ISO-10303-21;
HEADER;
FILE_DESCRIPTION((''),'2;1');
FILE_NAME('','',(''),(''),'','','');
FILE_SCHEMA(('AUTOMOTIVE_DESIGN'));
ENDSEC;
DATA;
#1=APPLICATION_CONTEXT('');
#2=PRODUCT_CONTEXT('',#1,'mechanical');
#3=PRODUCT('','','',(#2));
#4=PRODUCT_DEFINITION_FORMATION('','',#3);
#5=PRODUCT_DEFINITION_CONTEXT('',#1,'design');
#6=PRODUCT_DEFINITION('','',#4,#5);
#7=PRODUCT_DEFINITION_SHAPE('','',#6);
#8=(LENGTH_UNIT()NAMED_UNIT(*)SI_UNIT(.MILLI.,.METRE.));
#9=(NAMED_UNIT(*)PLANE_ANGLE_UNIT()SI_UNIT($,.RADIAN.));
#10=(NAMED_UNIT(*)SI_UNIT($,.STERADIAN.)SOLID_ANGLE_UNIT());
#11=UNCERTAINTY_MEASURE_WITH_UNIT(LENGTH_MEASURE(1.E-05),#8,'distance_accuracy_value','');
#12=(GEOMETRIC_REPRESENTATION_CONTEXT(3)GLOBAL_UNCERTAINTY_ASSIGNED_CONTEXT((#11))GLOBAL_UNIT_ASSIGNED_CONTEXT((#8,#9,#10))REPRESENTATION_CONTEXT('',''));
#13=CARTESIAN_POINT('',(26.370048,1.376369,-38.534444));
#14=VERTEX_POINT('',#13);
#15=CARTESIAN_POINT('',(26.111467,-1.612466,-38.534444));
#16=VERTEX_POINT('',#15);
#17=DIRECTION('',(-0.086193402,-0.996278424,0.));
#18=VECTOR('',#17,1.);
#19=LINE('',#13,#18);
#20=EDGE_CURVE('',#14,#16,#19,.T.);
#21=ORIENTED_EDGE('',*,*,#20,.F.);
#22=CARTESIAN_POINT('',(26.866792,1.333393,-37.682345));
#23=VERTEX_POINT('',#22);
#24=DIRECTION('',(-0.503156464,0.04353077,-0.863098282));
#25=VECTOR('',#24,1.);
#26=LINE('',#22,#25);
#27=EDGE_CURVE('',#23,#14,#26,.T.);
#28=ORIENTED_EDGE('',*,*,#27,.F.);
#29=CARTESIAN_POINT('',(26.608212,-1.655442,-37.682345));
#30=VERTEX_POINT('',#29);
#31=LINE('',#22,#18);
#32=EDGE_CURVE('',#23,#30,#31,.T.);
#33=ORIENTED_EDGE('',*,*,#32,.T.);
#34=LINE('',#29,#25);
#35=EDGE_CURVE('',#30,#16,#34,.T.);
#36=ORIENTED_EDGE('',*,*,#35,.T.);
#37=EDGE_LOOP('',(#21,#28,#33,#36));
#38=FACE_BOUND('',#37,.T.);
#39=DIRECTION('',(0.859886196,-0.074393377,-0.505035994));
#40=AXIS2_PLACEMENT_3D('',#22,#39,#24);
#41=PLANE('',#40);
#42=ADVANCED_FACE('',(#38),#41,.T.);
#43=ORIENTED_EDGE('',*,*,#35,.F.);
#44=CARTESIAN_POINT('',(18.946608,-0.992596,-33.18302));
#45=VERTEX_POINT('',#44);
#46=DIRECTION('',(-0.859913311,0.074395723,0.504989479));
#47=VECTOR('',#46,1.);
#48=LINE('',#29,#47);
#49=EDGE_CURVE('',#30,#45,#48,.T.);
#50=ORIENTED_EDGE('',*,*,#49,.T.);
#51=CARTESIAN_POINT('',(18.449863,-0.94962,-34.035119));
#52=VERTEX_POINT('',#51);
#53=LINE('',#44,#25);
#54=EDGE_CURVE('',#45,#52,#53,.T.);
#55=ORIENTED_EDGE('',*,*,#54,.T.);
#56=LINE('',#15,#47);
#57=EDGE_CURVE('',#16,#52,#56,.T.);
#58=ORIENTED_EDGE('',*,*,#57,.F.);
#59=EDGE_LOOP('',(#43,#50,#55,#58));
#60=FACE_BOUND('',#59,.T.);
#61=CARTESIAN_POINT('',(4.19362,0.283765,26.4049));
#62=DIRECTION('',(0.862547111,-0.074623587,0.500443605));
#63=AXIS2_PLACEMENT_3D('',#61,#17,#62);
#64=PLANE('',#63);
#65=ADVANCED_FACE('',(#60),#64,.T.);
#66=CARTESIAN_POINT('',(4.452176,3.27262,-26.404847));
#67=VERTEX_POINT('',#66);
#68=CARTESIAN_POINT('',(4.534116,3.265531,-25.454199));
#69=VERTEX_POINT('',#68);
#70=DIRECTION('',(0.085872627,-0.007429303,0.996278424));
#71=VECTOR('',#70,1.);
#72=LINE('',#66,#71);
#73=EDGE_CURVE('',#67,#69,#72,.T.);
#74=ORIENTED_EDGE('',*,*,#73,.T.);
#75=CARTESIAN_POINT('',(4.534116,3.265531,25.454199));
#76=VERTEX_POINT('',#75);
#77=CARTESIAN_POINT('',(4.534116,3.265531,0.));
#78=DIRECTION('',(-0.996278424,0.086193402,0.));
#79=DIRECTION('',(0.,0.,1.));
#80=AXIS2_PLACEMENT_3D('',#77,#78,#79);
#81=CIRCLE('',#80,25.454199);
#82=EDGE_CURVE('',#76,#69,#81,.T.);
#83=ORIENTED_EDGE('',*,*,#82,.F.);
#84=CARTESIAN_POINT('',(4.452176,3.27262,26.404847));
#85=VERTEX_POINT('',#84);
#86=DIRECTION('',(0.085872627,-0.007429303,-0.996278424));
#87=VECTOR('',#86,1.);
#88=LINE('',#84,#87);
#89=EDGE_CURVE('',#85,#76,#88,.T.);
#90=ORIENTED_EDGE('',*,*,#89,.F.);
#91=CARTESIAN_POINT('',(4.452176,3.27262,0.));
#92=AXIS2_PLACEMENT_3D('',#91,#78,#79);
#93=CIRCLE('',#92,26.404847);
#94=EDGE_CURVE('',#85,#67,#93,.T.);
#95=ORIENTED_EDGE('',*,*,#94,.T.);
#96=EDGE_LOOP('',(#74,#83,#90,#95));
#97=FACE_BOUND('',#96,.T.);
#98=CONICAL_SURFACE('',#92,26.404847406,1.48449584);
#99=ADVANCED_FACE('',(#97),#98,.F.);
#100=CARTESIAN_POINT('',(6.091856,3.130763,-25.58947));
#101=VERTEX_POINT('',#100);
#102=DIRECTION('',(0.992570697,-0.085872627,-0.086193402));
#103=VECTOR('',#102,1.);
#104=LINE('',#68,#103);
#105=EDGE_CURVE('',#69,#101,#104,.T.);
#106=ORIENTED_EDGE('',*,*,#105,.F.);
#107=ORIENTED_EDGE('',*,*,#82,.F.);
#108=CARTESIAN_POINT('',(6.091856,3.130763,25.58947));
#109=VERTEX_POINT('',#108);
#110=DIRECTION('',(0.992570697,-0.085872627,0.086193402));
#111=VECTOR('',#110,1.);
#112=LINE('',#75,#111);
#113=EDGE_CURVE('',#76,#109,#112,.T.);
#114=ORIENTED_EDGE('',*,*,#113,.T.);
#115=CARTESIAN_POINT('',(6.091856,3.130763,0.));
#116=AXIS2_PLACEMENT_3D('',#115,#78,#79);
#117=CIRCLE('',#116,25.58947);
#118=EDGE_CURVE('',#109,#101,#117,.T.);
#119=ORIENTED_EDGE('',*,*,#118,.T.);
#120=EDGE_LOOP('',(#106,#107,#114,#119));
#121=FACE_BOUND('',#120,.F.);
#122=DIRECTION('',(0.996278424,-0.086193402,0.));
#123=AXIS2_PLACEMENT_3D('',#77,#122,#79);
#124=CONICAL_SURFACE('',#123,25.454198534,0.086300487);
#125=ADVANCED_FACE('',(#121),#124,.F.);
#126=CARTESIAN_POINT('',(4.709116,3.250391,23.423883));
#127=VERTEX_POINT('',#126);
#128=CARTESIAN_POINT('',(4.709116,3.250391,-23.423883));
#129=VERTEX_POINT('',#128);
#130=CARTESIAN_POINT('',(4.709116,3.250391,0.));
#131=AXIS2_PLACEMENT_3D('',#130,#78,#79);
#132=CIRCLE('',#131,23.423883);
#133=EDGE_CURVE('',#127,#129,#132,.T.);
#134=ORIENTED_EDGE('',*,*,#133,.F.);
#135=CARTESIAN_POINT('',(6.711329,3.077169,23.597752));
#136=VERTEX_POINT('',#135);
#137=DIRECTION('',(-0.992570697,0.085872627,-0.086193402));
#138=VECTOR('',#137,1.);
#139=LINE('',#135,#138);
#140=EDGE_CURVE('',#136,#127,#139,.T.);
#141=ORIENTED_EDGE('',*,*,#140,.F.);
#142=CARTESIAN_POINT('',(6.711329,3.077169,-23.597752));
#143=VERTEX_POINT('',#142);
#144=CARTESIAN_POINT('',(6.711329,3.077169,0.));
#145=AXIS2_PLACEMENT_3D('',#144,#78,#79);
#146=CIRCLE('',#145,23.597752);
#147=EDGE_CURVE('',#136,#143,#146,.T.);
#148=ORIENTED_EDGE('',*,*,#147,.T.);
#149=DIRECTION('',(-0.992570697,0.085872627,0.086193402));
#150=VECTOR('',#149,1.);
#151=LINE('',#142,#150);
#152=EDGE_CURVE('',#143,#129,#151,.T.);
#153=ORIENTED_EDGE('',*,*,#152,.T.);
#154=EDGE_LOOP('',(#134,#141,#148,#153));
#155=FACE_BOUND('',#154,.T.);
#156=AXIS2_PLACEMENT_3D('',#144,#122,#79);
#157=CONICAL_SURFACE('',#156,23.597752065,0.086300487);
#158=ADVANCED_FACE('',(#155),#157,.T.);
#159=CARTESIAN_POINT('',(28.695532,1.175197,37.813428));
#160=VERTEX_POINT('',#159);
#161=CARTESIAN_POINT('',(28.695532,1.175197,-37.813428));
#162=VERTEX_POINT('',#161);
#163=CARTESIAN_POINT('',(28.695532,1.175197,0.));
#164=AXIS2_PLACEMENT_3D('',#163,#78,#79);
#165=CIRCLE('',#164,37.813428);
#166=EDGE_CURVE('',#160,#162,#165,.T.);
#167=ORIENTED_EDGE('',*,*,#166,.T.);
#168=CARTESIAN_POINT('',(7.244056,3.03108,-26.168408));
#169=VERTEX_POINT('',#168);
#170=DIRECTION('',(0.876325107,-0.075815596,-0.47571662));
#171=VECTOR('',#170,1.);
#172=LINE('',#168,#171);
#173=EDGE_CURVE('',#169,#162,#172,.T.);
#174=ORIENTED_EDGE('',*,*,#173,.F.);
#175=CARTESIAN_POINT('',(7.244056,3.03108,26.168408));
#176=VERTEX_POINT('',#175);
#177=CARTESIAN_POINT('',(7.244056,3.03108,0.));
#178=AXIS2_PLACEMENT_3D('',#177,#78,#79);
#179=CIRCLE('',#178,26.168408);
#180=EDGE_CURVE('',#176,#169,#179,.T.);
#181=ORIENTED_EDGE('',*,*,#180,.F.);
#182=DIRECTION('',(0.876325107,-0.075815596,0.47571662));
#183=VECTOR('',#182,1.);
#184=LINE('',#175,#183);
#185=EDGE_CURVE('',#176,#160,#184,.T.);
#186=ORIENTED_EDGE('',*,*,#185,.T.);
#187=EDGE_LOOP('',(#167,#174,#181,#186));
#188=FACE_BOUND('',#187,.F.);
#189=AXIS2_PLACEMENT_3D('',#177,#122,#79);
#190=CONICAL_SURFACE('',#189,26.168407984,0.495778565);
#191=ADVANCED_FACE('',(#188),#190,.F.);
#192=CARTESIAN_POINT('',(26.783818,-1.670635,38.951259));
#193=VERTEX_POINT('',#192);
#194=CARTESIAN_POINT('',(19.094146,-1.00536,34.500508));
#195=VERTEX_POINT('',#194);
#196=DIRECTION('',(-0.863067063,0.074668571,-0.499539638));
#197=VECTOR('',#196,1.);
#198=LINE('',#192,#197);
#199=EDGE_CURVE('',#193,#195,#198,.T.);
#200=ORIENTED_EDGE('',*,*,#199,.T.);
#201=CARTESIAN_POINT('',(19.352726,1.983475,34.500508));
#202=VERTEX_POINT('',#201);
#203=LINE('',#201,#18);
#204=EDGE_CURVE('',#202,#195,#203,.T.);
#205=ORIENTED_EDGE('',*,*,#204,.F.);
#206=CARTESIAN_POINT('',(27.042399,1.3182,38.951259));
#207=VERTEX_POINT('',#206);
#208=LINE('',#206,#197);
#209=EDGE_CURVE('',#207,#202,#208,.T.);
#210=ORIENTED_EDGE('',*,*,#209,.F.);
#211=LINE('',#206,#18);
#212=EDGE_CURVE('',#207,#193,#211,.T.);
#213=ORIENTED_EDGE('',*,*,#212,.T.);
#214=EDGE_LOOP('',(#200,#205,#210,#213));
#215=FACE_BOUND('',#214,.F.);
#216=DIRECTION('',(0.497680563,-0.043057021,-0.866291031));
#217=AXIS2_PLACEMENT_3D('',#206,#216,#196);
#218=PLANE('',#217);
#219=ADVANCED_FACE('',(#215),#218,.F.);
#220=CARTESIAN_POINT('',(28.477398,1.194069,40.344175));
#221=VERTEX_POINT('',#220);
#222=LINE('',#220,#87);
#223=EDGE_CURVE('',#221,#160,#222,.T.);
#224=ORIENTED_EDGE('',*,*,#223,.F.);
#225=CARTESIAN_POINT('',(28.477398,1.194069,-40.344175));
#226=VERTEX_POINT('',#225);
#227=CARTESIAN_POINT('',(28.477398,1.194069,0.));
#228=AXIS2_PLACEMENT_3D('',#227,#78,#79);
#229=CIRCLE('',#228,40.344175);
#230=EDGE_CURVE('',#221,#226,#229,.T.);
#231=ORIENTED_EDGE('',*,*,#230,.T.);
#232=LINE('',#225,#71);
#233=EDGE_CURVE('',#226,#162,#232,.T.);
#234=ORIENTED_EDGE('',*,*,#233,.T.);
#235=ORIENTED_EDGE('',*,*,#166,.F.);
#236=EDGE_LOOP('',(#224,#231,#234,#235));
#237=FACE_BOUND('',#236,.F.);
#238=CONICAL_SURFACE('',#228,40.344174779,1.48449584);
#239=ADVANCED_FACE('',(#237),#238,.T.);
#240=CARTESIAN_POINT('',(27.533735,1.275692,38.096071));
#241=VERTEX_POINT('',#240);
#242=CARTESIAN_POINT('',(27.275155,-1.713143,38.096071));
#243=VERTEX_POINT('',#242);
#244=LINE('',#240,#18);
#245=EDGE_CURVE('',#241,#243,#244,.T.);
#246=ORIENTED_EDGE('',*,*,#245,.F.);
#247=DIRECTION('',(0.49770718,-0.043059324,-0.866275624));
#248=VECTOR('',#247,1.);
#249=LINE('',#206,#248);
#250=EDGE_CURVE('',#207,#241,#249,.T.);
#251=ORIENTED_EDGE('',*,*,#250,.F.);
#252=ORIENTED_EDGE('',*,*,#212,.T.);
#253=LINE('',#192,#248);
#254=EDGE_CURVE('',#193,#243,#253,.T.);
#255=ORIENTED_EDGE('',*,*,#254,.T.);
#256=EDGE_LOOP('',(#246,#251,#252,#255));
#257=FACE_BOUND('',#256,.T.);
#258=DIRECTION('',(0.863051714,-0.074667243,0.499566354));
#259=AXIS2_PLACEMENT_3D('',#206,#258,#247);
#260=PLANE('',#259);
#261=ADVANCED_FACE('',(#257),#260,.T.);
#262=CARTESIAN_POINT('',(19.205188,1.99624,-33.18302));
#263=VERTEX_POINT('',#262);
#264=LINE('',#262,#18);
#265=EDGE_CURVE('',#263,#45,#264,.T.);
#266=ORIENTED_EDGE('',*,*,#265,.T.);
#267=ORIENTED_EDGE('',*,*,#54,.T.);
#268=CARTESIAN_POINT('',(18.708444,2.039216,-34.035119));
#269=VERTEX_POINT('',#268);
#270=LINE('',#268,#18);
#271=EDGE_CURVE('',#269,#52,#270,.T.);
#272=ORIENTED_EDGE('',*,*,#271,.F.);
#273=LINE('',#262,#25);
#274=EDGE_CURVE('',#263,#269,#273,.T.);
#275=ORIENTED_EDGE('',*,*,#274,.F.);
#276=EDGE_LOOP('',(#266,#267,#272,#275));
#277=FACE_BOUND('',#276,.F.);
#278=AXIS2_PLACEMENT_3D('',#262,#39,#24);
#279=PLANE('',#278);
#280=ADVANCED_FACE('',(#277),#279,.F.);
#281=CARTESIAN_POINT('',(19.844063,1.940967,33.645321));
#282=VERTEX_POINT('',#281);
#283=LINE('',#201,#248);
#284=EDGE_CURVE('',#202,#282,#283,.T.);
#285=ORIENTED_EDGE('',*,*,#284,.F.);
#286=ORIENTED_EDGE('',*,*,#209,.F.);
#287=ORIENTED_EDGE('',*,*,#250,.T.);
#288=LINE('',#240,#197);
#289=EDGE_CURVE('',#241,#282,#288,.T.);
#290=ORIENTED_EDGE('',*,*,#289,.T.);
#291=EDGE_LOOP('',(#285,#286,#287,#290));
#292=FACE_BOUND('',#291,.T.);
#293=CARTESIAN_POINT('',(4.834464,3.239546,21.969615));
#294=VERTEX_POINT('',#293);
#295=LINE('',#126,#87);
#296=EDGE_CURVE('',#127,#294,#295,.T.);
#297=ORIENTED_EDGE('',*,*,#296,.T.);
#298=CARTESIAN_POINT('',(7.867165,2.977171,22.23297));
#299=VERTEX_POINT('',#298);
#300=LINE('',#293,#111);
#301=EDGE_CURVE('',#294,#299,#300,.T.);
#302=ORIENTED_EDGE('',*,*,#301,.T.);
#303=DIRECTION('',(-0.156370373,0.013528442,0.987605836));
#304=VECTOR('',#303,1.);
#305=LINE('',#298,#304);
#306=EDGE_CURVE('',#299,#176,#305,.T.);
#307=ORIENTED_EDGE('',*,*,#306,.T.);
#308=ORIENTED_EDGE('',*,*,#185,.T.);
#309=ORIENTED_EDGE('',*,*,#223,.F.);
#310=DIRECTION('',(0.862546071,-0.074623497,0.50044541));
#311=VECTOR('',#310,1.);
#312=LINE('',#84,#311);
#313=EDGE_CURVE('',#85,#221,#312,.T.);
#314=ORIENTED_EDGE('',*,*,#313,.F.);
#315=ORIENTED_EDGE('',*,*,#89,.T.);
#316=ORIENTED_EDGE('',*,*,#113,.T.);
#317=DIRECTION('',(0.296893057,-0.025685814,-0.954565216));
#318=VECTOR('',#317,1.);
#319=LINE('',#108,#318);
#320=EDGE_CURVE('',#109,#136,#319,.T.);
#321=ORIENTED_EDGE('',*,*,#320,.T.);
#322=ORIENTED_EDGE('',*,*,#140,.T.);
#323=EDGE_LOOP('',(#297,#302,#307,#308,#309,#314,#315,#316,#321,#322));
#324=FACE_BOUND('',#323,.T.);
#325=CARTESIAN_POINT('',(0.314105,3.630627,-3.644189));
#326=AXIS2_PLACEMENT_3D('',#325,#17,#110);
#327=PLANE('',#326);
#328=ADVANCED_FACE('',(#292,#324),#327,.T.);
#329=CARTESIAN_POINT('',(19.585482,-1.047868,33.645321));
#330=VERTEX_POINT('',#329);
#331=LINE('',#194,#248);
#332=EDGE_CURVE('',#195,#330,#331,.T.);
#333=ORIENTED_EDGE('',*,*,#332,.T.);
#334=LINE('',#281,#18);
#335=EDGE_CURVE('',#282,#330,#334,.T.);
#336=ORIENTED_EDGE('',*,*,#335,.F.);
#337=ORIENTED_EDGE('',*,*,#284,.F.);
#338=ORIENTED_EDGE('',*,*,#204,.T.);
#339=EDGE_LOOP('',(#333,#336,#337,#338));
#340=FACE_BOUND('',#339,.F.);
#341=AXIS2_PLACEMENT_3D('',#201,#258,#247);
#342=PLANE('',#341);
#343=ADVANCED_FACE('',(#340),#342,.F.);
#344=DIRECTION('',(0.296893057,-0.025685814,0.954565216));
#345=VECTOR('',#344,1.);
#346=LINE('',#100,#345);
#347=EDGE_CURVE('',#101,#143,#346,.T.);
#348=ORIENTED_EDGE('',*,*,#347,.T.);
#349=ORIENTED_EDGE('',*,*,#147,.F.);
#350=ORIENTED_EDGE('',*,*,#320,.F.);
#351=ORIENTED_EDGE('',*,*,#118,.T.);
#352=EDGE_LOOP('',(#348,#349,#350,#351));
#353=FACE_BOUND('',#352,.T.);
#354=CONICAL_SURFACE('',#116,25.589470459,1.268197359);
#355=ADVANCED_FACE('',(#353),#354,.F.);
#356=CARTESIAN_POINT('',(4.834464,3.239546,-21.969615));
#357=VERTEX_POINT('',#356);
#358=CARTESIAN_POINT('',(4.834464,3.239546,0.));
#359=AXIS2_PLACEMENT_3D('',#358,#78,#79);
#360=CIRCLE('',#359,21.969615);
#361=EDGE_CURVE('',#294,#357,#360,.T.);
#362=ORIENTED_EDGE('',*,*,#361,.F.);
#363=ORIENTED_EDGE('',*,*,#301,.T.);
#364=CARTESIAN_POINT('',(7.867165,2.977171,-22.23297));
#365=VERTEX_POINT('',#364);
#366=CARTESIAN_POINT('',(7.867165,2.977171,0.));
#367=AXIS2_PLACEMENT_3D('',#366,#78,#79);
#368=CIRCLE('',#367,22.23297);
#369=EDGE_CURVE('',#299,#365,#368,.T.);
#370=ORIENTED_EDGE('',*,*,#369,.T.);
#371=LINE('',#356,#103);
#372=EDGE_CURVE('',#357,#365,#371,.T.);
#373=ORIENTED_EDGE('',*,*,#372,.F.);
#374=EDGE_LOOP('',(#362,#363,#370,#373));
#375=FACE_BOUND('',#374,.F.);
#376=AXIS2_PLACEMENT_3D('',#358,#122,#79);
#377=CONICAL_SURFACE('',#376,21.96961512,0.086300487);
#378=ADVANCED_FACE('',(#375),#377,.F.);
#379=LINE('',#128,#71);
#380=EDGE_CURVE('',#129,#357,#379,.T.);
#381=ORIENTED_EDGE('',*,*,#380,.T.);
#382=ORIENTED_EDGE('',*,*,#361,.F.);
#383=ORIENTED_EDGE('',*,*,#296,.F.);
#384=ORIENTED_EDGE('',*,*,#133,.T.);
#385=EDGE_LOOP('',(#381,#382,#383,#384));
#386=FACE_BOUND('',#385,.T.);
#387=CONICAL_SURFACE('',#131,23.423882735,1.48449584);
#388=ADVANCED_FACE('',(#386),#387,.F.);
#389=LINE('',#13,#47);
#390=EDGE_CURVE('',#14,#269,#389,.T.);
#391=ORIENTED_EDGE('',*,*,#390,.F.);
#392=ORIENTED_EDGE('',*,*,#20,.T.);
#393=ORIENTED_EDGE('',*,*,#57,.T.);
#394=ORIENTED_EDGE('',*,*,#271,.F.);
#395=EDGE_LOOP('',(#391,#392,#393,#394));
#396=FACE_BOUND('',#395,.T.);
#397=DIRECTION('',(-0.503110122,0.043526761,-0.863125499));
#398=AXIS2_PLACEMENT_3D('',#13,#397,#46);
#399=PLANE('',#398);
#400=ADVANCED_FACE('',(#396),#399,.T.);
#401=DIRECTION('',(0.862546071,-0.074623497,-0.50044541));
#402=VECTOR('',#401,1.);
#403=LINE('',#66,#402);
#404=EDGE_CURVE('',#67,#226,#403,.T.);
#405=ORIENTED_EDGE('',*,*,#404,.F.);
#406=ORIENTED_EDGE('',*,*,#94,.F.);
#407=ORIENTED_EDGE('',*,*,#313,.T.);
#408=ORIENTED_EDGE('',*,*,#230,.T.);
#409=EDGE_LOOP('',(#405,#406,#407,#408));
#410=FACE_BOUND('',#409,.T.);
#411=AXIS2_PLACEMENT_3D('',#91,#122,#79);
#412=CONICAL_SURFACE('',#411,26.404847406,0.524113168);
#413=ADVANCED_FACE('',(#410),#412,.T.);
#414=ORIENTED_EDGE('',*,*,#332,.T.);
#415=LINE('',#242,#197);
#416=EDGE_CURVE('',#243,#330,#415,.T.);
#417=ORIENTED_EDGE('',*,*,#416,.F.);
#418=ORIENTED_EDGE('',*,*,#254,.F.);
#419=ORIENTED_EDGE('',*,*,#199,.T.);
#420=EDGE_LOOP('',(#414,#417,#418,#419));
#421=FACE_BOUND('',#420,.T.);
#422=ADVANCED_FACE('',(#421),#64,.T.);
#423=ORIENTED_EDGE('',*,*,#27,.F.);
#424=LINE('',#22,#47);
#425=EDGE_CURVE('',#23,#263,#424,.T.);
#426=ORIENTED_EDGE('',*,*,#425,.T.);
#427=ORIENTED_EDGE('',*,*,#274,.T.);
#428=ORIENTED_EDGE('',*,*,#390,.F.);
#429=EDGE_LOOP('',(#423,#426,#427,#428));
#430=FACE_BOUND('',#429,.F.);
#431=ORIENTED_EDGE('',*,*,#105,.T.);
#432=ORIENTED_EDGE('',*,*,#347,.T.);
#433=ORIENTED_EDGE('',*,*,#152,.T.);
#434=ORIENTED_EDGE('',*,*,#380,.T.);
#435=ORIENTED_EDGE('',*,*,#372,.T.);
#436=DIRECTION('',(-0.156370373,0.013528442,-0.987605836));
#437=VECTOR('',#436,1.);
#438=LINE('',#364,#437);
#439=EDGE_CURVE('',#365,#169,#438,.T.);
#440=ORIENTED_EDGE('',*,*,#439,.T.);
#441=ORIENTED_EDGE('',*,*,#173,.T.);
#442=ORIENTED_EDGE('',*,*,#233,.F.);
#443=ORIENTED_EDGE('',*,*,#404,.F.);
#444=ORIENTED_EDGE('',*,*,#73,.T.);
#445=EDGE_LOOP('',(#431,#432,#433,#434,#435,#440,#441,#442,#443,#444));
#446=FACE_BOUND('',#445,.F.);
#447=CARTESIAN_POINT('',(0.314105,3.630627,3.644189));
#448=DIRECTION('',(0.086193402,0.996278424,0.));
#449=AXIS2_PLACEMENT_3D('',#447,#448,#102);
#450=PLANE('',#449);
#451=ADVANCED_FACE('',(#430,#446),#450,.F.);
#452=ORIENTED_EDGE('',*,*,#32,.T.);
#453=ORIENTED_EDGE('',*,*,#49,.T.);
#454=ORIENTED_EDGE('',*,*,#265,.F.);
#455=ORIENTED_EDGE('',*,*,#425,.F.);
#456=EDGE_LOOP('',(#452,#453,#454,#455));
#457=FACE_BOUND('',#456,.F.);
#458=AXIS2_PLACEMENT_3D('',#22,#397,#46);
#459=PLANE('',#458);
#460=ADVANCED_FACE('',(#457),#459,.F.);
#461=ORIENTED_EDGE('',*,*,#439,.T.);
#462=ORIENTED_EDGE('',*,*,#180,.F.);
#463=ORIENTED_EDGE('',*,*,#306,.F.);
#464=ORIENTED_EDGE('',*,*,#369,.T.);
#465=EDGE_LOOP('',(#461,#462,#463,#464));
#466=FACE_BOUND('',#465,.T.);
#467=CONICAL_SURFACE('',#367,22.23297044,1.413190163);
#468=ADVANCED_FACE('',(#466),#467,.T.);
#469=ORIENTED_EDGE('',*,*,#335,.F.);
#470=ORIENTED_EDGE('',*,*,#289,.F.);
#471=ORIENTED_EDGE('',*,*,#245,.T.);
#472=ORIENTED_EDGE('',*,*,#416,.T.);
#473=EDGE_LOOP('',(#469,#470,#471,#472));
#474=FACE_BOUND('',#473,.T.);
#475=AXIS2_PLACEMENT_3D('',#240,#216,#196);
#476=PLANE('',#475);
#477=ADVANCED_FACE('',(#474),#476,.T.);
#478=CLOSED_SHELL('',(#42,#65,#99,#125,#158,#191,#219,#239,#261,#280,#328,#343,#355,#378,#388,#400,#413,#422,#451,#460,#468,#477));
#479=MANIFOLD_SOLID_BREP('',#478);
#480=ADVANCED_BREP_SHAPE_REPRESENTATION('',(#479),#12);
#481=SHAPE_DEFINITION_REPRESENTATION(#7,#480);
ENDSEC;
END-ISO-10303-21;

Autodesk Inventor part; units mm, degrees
ref_plane "YZ Plane" through (0, 0, 0) normal (1, 0, 0) x (0, 1, 0)
ref_plane "XZ Plane" through (0, 0, 0) normal (0, 1, 0) x (-1, 0, 0)
ref_plane "XY Plane" through (0, 0, 0) normal (0, 0, 1) x (1, 0, 0)
sketch "Sketch1" plane through (0, 0, 0) normal (1, 0, 0) x (0, 1, 0)
  arc A0 (6, 5) -> (0, 6.4776) centre (1.5083, -0.3184) ccw
  arc A1 (0, 6.4776) -> (-6, 2) centre (-0.0372, 0.2686) ccw
  arc A2 (-6, 2) -> (-5, -3.4628) centre (-1.5043, 0) ccw
  arc A3 (-5, -3.4628) -> (2, -5.5969) centre (1.6627, 5.8444) ccw
  arc A4 (2, -5.5969) -> (6.9353, -3.4628) centre (1.5482, 2.2219) ccw
  arc A5 (6, 5) -> (13, 1) centre (22.0402, 24.9454) ccw
  arc A6 (13, -1) -> (6.9353, -3.4628) centre (16.5953, -18.5517) ccw
  arc A7 (13, -1) -> (13, 1) centre (11.912, 0) ccw
  arc A8 (15.1251, -1.2068) -> (15.1251, 1.1192) centre (13.8597, -0.0438) ccw
  arc A9 (6.9841, 5.7712) -> (15.1251, 1.1192) centre (25.6388, 28.9677) ccw
  arc A10 (6.9841, 5.7712) -> (0.0061, 7.4897) centre (1.7602, -0.414) ccw
  arc A11 (0.0061, 7.4897) -> (-6.9719, 2.2822) centre (-0.0372, 0.2686) ccw
  arc A12 (-6.9719, 2.2822) -> (-5.8089, -4.0711) centre (-1.7435, -0.0438) ccw
  arc A13 (-5.8089, -4.0711) -> (2.3321, -6.5529) centre (1.9397, 6.7532) ccw
  arc A14 (2.3321, -6.5529) -> (8.0718, -4.0711) centre (1.8067, 2.5403) ccw
  arc A15 (15.1251, -1.2068) -> (8.0718, -4.0711) centre (19.3063, -21.6193) ccw
  point P0 (0, 0)
sketch "Sketch2" plane through (0, 0, 0) normal (0, 0, 1) x (1, 0, 0)
  arc A0 (4.5893, 15.6275) -> (5.3653, 12.7341) centre (8.4769, 15.1194) ccw
  arc A1 (7.1334, 6.0475) -> (5.3653, 12.7341) centre (-9.3019, 5.2787) ccw
  arc A2 (4, -1) -> (7.1334, 6.0475) centre (-2.3212, 6.0308) ccw
  arc A3 (4, -1) -> (2.2783, -7.605) centre (15.174, -7.4395) ccw
  arc A4 (4.5893, 15.6275) -> (-5.4042, 15.6275) centre (-0.4074, 13.9881) ccw
  arc A5 (-4.7137, -7.4395) -> (2.2783, -7.605) centre (-1.0169, 0.9638) ccw
  arc A6 (-5.4042, 15.6275) -> (-4.7137, -7.4395) centre (15.8945, 4.7212) ccw
  point P0 (0, 0)
  point P1 (16.0644, 6.0537)
sketch "Sketch3" plane through (0, 0, 0) normal (0, 0, 1) x (1, 0, 0)
  line L0 (8, 6) -> (8, -9.7213)
  line L1 (8, 6) -> (8, 19.0901)
  arc A0 (8, -9.7213) -> (8, 19.0901) centre (-3.1204, 4.6844) ccw
  point P0 (0, 0)
sketch "Sketch4" plane through (0, 0, 0) normal (0, 0, 1) x (1, 0, 0)
  arc A0 (4, -3) -> (3, -7.466) centre (10.199, -6.733) ccw
  arc A1 (4, -3) -> (7.6292, 3.7812) centre (-12.6955, 10.297) ccw
  arc A2 (7.6292, 3.7812) -> (7, 11) centre (-7.2238, 6.1234) ccw
  arc A3 (7, 11) -> (6.1482, 13) centre (-7.2238, 6.1234) ccw
  arc A4 (5.3976, 15.5783) -> (6.1482, 13) centre (8.6756, 15.1342) ccw
  arc A5 (3, -7.466) -> (9, -9) centre (8, -0.4104) ccw
  arc A6 (11, 18) -> (5.3976, 15.5783) centre (10.5, 11.4654) ccw
  arc A7 (9, -9) -> (11, 18) centre (-69.2967, 10.3738) ccw
  point P0 (0, 0)
sketch "Sketch5" plane through (0, 0, 0) normal (1, 0, 0) x (0, 1, 0)
  arc A0 (13, -1.7602) -> (13, 2.0171) centre (12.6189, 0.1284) ccw
  arc A1 (17, 0) -> (13, 2.0171) centre (12.9569, -3.0431) ccw
  arc A2 (13, -1.7602) -> (17, 0) centre (13.7728, 1.9087) ccw
  point P0 (0, 0)
sketch "Sketch7" plane through (0, 0, 0) normal (1, 0, 0) x (0, 1, 0)
  circle A0 centre (5, 0.3375) radius 25
  point P0 (0, 0)
  dimension "d10" = 50
sketch "Sketch8" plane through (0, 0, 0) normal (0, 0, 1) x (1, 0, 0)
  arc A0 (4.5893, 15.6275) -> (5.3653, 12.7341) centre (8.4769, 15.1194) ccw
  arc A1 (7.1334, 6.0475) -> (5.3653, 12.7341) centre (-9.3019, 5.2787) ccw
  arc A2 (4, -1) -> (7.1334, 6.0475) centre (-2.3212, 6.0308) ccw
  arc A3 (4, -1) -> (2.2783, -7.605) centre (15.174, -7.4395) ccw
  arc A4 (4.5893, 15.6275) -> (-5.4042, 15.6275) centre (-0.4074, 13.9881) ccw
  arc A5 (-4.7137, -7.4395) -> (2.2783, -7.605) centre (-1.0169, 0.9638) ccw
  arc A6 (-5.4042, 15.6275) -> (-4.7137, -7.4395) centre (15.8945, 4.7212) ccw
  point P0 (0, 0)
sketch "Sketch9" plane through (0, 0, 0) normal (0, 0, 1) x (1, 0, 0)
  line L0 (2.2936, -15.8564) -> (2.2936, -6.8564)
  arc A0 (2.2936, -6.8564) -> (-3.9962, -9.9765) centre (0.2723, -10.6815) ccw
  arc A1 (-4, -16) -> (2.2936, -15.8564) centre (-0.9465, -11.8394) ccw
  arc A2 (-3.9962, -9.9765) -> (-4, -16) centre (14.3076, -12.9998) ccw
  point P0 (0, 0)
sketch "Sketch10" plane through (0, 0, 0) normal (1, 0, 0) x (0, 1, 0)
  arc A0 (13, -1) -> (13, 1) centre (11.912, 0) ccw
  arc A1 (6, 5) -> (13, 1) centre (22.0402, 24.9454) ccw
  arc A2 (6, 5) -> (0, 6.4776) centre (1.5083, -0.3184) ccw
  arc A3 (0, 6.4776) -> (-6, 2) centre (-0.0372, 0.2686) ccw
  arc A4 (-6, 2) -> (-5, -3.4628) centre (-1.5043, 0) ccw
  arc A5 (-5, -3.4628) -> (2, -5.5969) centre (1.6627, 5.8444) ccw
  arc A6 (2, -5.5969) -> (6.9353, -3.4628) centre (1.5482, 2.2219) ccw
  arc A7 (13, -1) -> (6.9353, -3.4628) centre (16.5953, -18.5517) ccw
  point P0 (0, 0)
sketch "Sketch11" plane through (0, 0, 0) normal (0, 0, 1) x (1, 0, 0)
  arc A0 (4, -3) -> (3, -7.466) centre (10.199, -6.733) ccw
  arc A1 (4, -3) -> (7.6292, 3.7812) centre (-12.6955, 10.297) ccw
  arc A2 (7.6292, 3.7812) -> (7, 11) centre (-7.2238, 6.1234) ccw
  arc A3 (7, 11) -> (6.1482, 13) centre (-7.2238, 6.1234) ccw
  arc A4 (5.3976, 15.5783) -> (6.1482, 13) centre (8.6756, 15.1342) ccw
  arc A5 (11, -15) -> (11, 18) centre (-58.5, 1.5) ccw
  arc A6 (3, -7.466) -> (3.1376, -15) centre (85.1776, -9.733) ccw
  arc A7 (6, 24) -> (5.3976, 15.5783) centre (36.0186, 17.6203) ccw
  arc A8 (11, 18) -> (6, 24) centre (2.7033, 16.1694) ccw
  arc A9 (3.1376, -15) -> (11, -15) centre (7.0688, -10.5838) ccw
  arc A10 (5, 24) -> (4.5969, 15.5783) centre (45.756, 17.829) ccw
  arc A11 (-2, 19) -> (4.5969, 15.5783) centre (5.6189, 25.6189) ccw
  arc A12 (5, 24) -> (-2, 19) centre (11.5, 7.5) ccw
  point P0 (0, 0)
sketch "Sketch12" plane through (0, 0, 0) normal (1, 0, 0) x (0, 1, 0)
  circle A0 centre (3, 0.2318) radius 20
  circle A1 centre (3, 0.2318) radius 19
  point P0 (0, 0)
  dimension "d21" = 40
  dimension "d22" = 38
sketch "Sketch13" plane through (0, 0, 0) normal (0, 0, 1) x (1, 0, 0)
  arc A0 (4.6444, -3) -> (3.6444, -7.466) centre (10.8434, -6.733) ccw
  arc A1 (4.6444, -3) -> (8.2736, 3.7812) centre (-12.0511, 10.297) ccw
  arc A2 (8.2736, 3.7812) -> (7.6444, 11) centre (-6.5793, 6.1234) ccw
  arc A3 (7.6444, 11) -> (6.7926, 13) centre (-6.5793, 6.1234) ccw
  arc A4 (6.042, 15.5783) -> (6.7926, 13) centre (9.3201, 15.1342) ccw
  arc A5 (12.1446, -13.3563) -> (11.6094, 18.8213) centre (-67.1488, 1.418) ccw
  arc A6 (4.5893, 15.6275) -> (5.3653, 12.7341) centre (8.4769, 15.1194) ccw
  arc A7 (7.1334, 6.0475) -> (5.3653, 12.7341) centre (-9.3019, 5.2787) ccw
  arc A8 (4, -1) -> (7.1334, 6.0475) centre (-2.3212, 6.0308) ccw
  arc A9 (4, -1) -> (2.2783, -7.605) centre (15.174, -7.4395) ccw
  arc A10 (-5.4042, 15.6275) -> (-4.7137, -7.4395) centre (15.8945, 4.7212) ccw
  arc A11 (3.6444, -7.466) -> (4.6444, -19) centre (48.1921, -9.4141) ccw
  arc A12 (1, -17) -> (2.2783, -7.605) centre (-20.1318, -9.3402) ccw
  arc A13 (4.5893, 15.6275) -> (4, 28) centre (-90.183, 17.3138) ccw
  arc A14 (6.0097, 28) -> (6.042, 15.5783) centre (472.3708, 23) ccw
  arc A15 (4.6444, -19) -> (12.1446, -13.3563) centre (5.8088, -12.7419) ccw
  arc A16 (11.6094, 18.8213) -> (6.0097, 28) centre (-7.4499, 13.4913) ccw
  arc A17 (-4.7137, -7.4395) -> (1, -17) centre (32.2099, 8.14) ccw
  arc A18 (4, 28) -> (-5.4042, 15.6275) centre (39.2165, -8.5279) ccw
  point P0 (0, 0)
sketch "Sketch16" plane through (0, 0, 0) normal (0, 0, 1) x (1, 0, 0)
  arc A0 (7.7852, 10.9763) -> (6.9451, 12.9812) centre (-6.467, 6.1832) ccw
  arc A1 (8.372, 3.7539) -> (7.7852, 10.9763) centre (-6.467, 6.1832) ccw
  arc A2 (4.7031, -3.0059) -> (8.372, 3.7539) centre (-11.9141, 10.3888) ccw
  arc A3 (4.7031, -3.0059) -> (3.6769, -7.4659) centre (10.88, -6.7752) ccw
  arc A4 (6.2096, 15.5639) -> (6.9451, 12.9812) centre (9.485, 15.1006) ccw
  line L0 (3.6769, -7.4659) -> (3.6769, -13)
  line L1 (3.6769, -13) -> (8.7312, -13)
  line L2 (7.1813, -23) -> (8.45, -23) projected
  line L3 (6.2096, 15.5639) -> (6.0634, 19)
  line L4 (6.0634, 19) -> (8.7312, 19)
  line L5 (8.7312, 19) -> (8.7312, -13)
  point P0 (0, 0)
sketch "Sketch18" plane through (0, 0, 0) normal (0, 1, 0) x (-1, 0, 0)
  arc A0 (0, 16) -> (0, -16) centre (63, 0) ccw
  arc A1 (0, -16) -> (0, 16) centre (-1, 0) ccw
  point P0 (0, 0)
sketch "Sketch19" plane through (0, 0, 0) normal (0, 0, 1) x (1, 0, 0)
  arc A0 (0, -13) -> (0, 21.2939) centre (-44.6367, 4.1469) ccw
  arc A1 (0, 21.2939) -> (0, -13) centre (9.2646, 4.1469) ccw
  point P0 (0, 0)
sketch "Sketch20" plane through (0, 0, 0) normal (0, 1, 0) x (-1, 0, 0)
  arc A0 (0, 18) -> (0, -21) centre (116.9496, -1.5) ccw
  arc A1 (0, -21) -> (0, 18) centre (-188.5, -1.5) ccw
  point P0 (0, 0)
sketch "Sketch21" plane through (0, 0, 0) normal (0, 0, 1) x (1, 0, 0)
  arc A0 (4.5893, 15.6275) -> (5.3653, 12.7341) centre (8.4769, 15.1194) ccw
  arc A1 (7.1334, 6.0475) -> (5.3653, 12.7341) centre (-9.3019, 5.2787) ccw
  arc A2 (4, -1) -> (7.1334, 6.0475) centre (-2.3212, 6.0308) ccw
  arc A3 (4, -1) -> (2.2783, -7.605) centre (15.174, -7.4395) ccw
  arc A4 (-5.4042, 15.6275) -> (-4.7137, -7.4395) centre (15.8945, 4.7212) ccw
  arc A5 (1.6146, -47) -> (2.2783, -7.605) centre (-871.3055, -12.5889) ccw
  arc A6 (-4.7137, -7.4395) -> (1.6146, -47) centre (3.6662, -26.3854) ccw
  arc A7 (6.6047, 48.2766) -> (4.5893, 15.6275) centre (207.8183, 19.4692) ccw
  arc A8 (6.6047, 48.2766) -> (-5.4042, 15.6275) centre (18.1068, 25.5128) ccw
  point P0 (4.9602, 0)
sketch "Sketch22" plane through (0, 0, 0) normal (1, 0, 0) x (0, 1, 0)
  arc A0 (12.671, -1.508) -> (10.1452, -2.4415) centre (13.2273, -6.897) ccw
  arc A1 (5.972, -5.9193) -> (10.1452, -2.4415) centre (1.4729, 3.7221) ccw
  arc A2 (-1.0034, -7.134) -> (5.972, -5.9193) centre (0.0411, 7.5036) ccw
  arc A3 (-6.1623, -3.0965) -> (-1.0034, -7.134) centre (-0.5861, -1.2862) ccw
  arc A4 (-5.468, 3.7221) -> (-6.1623, -3.0965) centre (0.6002, -0.3405) ccw
  arc A5 (6.5632, 5.6579) -> (-0.5861, 6.5886) centre (1.6095, -4.4698) ccw
  arc A6 (-0.5861, 6.5886) -> (-5.468, 3.7221) centre (0, 0) ccw
  arc A7 (6.5632, 5.6579) -> (11.3492, 2.8919) centre (22.0985, 27.015) ccw
  arc A8 (14.2401, 1.3463) -> (11.3492, 2.8919) centre (11.1023, -1.0462) ccw
  arc A9 (13.4173, -1.2862) -> (14.2401, 1.3463) centre (12.4465, 0.462) ccw
  arc A10 (12.671, -1.508) -> (13.4173, -1.2862) centre (12.7302, -0.341) ccw
  point P0 (0, 0)
  point P1 (20.1069, -9.3097)
sketch "Sketch23" plane through (0, 0, 0) normal (0, 0, 1) x (1, 0, 0)
  arc A0 (4, -3) -> (3, -7.466) centre (10.199, -6.733) ccw
  arc A1 (4, -3) -> (7.6292, 3.7812) centre (-12.6955, 10.297) ccw
  arc A2 (7.6292, 3.7812) -> (7, 11) centre (-7.2238, 6.1234) ccw
  arc A3 (7, 11) -> (6.1482, 13) centre (-7.2238, 6.1234) ccw
  arc A4 (5.3976, 15.5783) -> (6.1482, 13) centre (8.6756, 15.1342) ccw
  arc A5 (3, -7.466) -> (12.0039, -34.009) centre (74.5087, 1.9925) ccw
  arc A6 (12.0039, -34.009) -> (12.0039, 40.009) centre (-50.8687, 3) ccw
  arc A7 (12.0039, 40.009) -> (5.3976, 15.5783) centre (75.5489, 9.7171) ccw
  point P0 (0, 0)
sketch "Sketch24" plane through (0, 0, 0) normal (1, 0, 0) x (0, 1, 0)
  circle A0 centre (4, 0) radius 24.0208
  circle A1 centre (4, 0) radius 54.037
  point P0 (0, 0)
sketch "Sketch25" plane through (0, 0, 0) normal (0, 0, 1) x (1, 0, 0)
  line L0 (2.9628, -6.7024) -> (3, -28)
  arc A0 (7, 36) -> (4.5756, 19.3965) centre (118.9772, 11.1705) ccw
  arc A1 (5.9839, 23.9235) -> (5.3976, 15.5783) centre (44.4323, 17.0293) ccw
  arc A2 (5.9839, 23.9235) -> (7, 33) centre (-89.9402, 39.2578) ccw
  arc A3 (5.3976, 15.5783) -> (7, 33) centre (-0.8843, 24.9407) ccw
  arc A4 (7, 36) -> (4.5756, 19.3965) centre (13.0884, 26.6322) ccw
  arc A5 (3, -28) -> (2.9628, -6.7024) centre (-3.3961, -17.3623) ccw
  point P0 (0, 0)
sketch "Sketch31" plane through (0, 0, 0) normal (1, 0, 0) x (0, 1, 0)
  circle A0 centre (4.1775, 0) radius 24.15
  circle A1 centre (4.1775, 0) radius 23
  point P0 (0, 0)
  dimension "d65" = 46
  dimension "d66" = 48.3
sketch "Sketch32" plane through (0, 0, 0) normal (0, 0, 1) x (1, 0, 0)
  arc A0 (4, -1) -> (2.2783, -7.605) centre (15.174, -7.4395) ccw
  arc A1 (4, -1) -> (7.1334, 6.0475) centre (-2.3212, 6.0308) ccw
  arc A2 (7.1334, 6.0475) -> (5.3653, 12.7341) centre (-9.3019, 5.2787) ccw
  arc A3 (4.5893, 15.6275) -> (5.3653, 12.7341) centre (8.4769, 15.1194) ccw
  arc A4 (-5.4042, 15.6275) -> (-4.7137, -7.4395) centre (15.8945, 4.7212) ccw
  arc A5 (1.6146, -47) -> (2.2783, -7.605) centre (-871.3055, -12.5889) ccw
  arc A6 (-4.7137, -7.4395) -> (1.6146, -47) centre (3.6662, -26.3854) ccw
  arc A7 (6.6047, 48.2766) -> (4.5893, 15.6275) centre (207.8183, 19.4692) ccw
  arc A8 (6.6047, 48.2766) -> (-5.4042, 15.6275) centre (18.1068, 25.5128) ccw
  point P0 (0, 0)
sketch "Sketch34" plane through (0, 0, 0) normal (0, 0, 1) x (1, 0, 0)
  arc A0 (5, -4) -> (9, 6) centre (-7, 6.6) ccw
  arc A1 (5, -4) -> (4, -8) centre (10.5, -7.5) ccw
  arc A2 (4, -19.9725) -> (4, -8) centre (-95.2669, -13.9862) ccw
  arc A3 (9, 6) -> (6.6308, 15) centre (-16.4523, 4.1118) ccw
  line L0 (6.6308, 15) -> (6.6308, 28.2457)
  arc A4 (4, -19.9725) -> (6.6308, 28.2457) centre (64.4177, 0.9119) ccw
  point P0 (0, 0)
sketch "Sketch35" plane through (0, 0, 0) normal (0, 0, 1) x (1, 0, 0)
  arc A0 (12, -8) -> (-7, -11) centre (15.0455, -88.9545) ccw
  arc A1 (-7, -11) -> (12, -8) centre (3.194, -13.8955) ccw
  point P0 (0, 0)
ref_plane "Work Plane16" through (6.6308, 4.1775, 0) normal (1, 0, 0) x (0, 0, -1)
sketch "Sketch36" plane through (6.6308, 4.1775, 0) normal (1, 0, 0) x (0, 0, -1)
  arc A0 (21.5893, 10.8225) -> (-21.5893, 10.8225) centre (0, -0.149) ccw
  arc A1 (20.2947, 10.8225) -> (-20.2947, 10.8225) centre (0, 0) ccw
  line L0 (-21.5893, 10.8225) -> (-20.2947, 10.8225)
  line L1 (-21.5893, 10.8225) -> (-20.2947, 10.8225)
  line L2 (20.2947, 10.8225) -> (21.5893, 10.8225)
  point P0 (0, -4.1775)
sketch "Sketch37" plane through (0, 0, 0) normal (1, 0, 0) x (0, 1, 0)
  arc A0 (15, 20.2947) -> (6, 22.9277) centre (4.1775, 0) ccw
  arc A1 (15, 21.5893) -> (6, 24.0811) centre (4.9955, 2.9543) ccw
  line L0 (15, 21.5893) -> (15, 20.2947)
  line L1 (15, 21.5893) -> (15, 20.2947)
  line L2 (6, 22.9277) -> (6, 24.0811)
  line L3 (6, 24.0811) -> (6, 22.9277)
  line L4 (15, -20.2947) -> (15, -21.5893) projected
  line L5 (15, -21.5351) -> (15, -20.2947)
  arc A2 (6, -24.0811) -> (15, -21.5893) centre (4.3914, -0.7727) ccw
  arc A3 (6, -22.9277) -> (15, -20.2947) centre (4.1775, 0) ccw
  line L6 (6, -24.0811) -> (6, -22.9277) projected
  line L7 (6, -24.0811) -> (6, -22.9277)
  point P0 (0, 0)
sketch "Sketch38" plane through (0, 0, 0) normal (0, 0, 1) x (1, 0, 0)
  arc A0 (7.1334, 6) -> (5.3972, 12.671) centre (-9.2641, 5.2939) ccw
  arc A1 (4.5581, 15) -> (5.3972, 12.671) centre (8.676, 15.1681) ccw
  line L0 (0, 15) -> (4.5581, 15) projected
  line L1 (0, 6) -> (7.1334, 6) projected
  arc A2 (4.5581, 15) -> (7.1334, 6) centre (1.4649, 9.2464) ccw
  point P0 (0, 0)
  point P1 (6.4152, 10.1452)
  point P2 (4.945, 13.4173)
sketch "Sketch39" plane through (0, 0, 0) normal (0, 0, 1) x (1, 0, 0)
  arc A0 (9, 6) -> (11.63, 15) centre (12.0023, 10.0069) ccw
  arc A1 (9, 6) -> (11.63, 15) centre (-3.4729, 14.5291) ccw
  point P0 (0, 0)
sketch "Sketch40" plane through (0, 0, 0) normal (0, 0, 1) x (1, 0, 0)
  arc A0 (1, -11) -> (5, -7) centre (4.0607, -10.0607) ccw
  arc A1 (5, -7) -> (1, -11) centre (6.5, -12.5) ccw
  point P0 (0, 0)
  point P1 (2.963, -6.7889)
sketch "Sketch41" plane through (0, 0, 0) normal (0, 0, 1) x (1, 0, 0)
  line L0 (26.7844, 11.2115) -> (14, 17)
  line L1 (14, 17) -> (1.6259, -10.3292)
  line L2 (1.6259, -10.3292) -> (14.4104, -16.1177)
  line L3 (14.4104, -16.1177) -> (26.7844, 11.2115)
  point P0 (0, 0)
  dimension "d87" = 30
ref_plane "Work Plane13" through (2.4677, -8.47, 20.5733) normal (0.9109718, -0.4124686, 0) x (0, 0, -1)
sketch "Sketch43" plane through (2.4677, -8.47, 20.5733) normal (0.9109718, -0.4124686, 0) x (0, 0, -1)
  line L0 (-2.3543, 15.8761) -> (-3.5078, 15.8761)
  line L1 (-3.5078, 15.8761) -> (-2.3543, 15.8761)
  arc A0 (-3.5078, 15.8761) -> (0.1198, -0.2516) centre (25.1927, 13.8599) ccw
  line L2 (1.4913, -0.2516) -> (0.1198, -0.2516)
  line L3 (0.1198, -0.2516) -> (1.4913, -0.2516)
  line L4 (-1.278, 5.6151) -> (14.6782, 5.6151) projected
  arc A1 (-2.3543, 15.8761) -> (1.4913, -0.2516) centre (22.6187, 13.3086) ccw
  point P0 (20.5733, 6.6981)
  point P1 (1.4551, -0.1819)
ref_plane "Work Plane14" through (2.964, -7.3739, 19.8888) normal (0.9109718, -0.4124686, 0) x (0, 0, -1)
sketch "Sketch45" plane through (2.964, -7.3739, 19.8888) normal (0.9109718, -0.4124686, 0) x (0, 0, -1)
  line L0 (43.9735, 14.6294) -> (42.8127, 14.6294)
  line L1 (42.8202, 14.6294) -> (43.9735, 14.6294) projected
  arc A0 (40.3423, -1.4549) -> (43.9735, 14.6294) centre (15.2518, 12.6615) ccw
  arc A1 (39, -1.4549) -> (42.8202, 14.6294) centre (15.5968, 12.5994) ccw
  line L2 (40.3423, -1.4549) -> (38.9708, -1.4549)
  line L3 (38.9708, -1.4549) -> (40.3423, -1.4549)
  point P0 (19.8888, 5.4949)
sketch "Sketch46" plane through (0, 0, 0) normal (0, 0, 1) x (1, 0, 0)
  arc A0 (8.9982, -11.6413) -> (8.9982, 28.2457) centre (46.0154, 8.3022) ccw
  line L0 (8.9982, 28.2457) -> (8.9982, -11.6413)
  point P0 (0, 0)
sketch "Sketch47" plane through (0, 0, 0) normal (0, 0, 1) x (1, 0, 0)
  line L0 (13.5135, 0) -> (-7.3337, 0)
  line L1 (2.3639, -20.2737) -> (9.0424, -23.2975) construction
  line L2 (2.3639, -20.2737) -> (9.0424, -23.2975)
  line L3 (9.0424, -23.2975) -> (9.0424, -24.2545)
  line L4 (9.0424, -24.2545) -> (2.3639, -21.2074)
  line L5 (2.3639, -21.2074) -> (2.3639, -20.2737)
  point P0 (0, 0)
sketch "Sketch48" plane through (0, 0, 0) normal (1, 0, 0) x (0, 1, 0)
  line L0 (-7.605, -19.7528) -> (-7.605, 19.6257)
  arc A0 (-7.605, 19.6257) -> (-7.605, -19.7528) centre (1.069, -0.0635) ccw
  point P0 (0, 0)
sketch "Sketch49" plane through (0, 0, 0) normal (0, 0, 1) x (1, 0, 0)
  line L0 (2.2936, -7.605) -> (2.2936, -6.8564) projected
  line L1 (2.2936, -6.8564) -> (2.2936, -25.2348)
  arc A0 (2.2936, -6.8564) -> (2.2936, -25.2348) centre (2.131, -16.0456) ccw
  point P0 (0, 0)
sketch "Sketch50" plane through (0, 0, 0) normal (0, 0, 1) x (1, 0, 0)
  arc A0 (3.3209, -23.1081) -> (8.9982, 5.953) centre (-195.8612, 30.8887) ccw
  arc A1 (3.3209, -23.1081) -> (3, 48) centre (19.245, 12.5186) ccw
  arc A2 (3, 48) -> (8, 28.2457) centre (151.9378, 75.1876) ccw
  line L0 (8.9982, -11.6413) -> (8.9982, 5.953) projected
  arc A3 (8.9982, 5.953) -> (8, 28.2457) centre (-139.412, 10.4765) ccw
  point P0 (0, 0)
  point P1 (8.9982, 6)
sketch "Sketch52" plane through (0, 0, 0) normal (1, 0, 0) x (0, 1, 0)
  line L0 (32, 0) -> (-26, 0)
  arc A0 (32, 0) -> (-26, 0) centre (3, 2.0806) ccw
  point P0 (0, 0)
sketch "Sketch53" plane through (0, 0, 0) normal (1, 0, 0) x (0, 1, 0)
  arc A0 (13, -1.4779) -> (13, 1.4779) centre (12.9444, 0) ccw
  arc A1 (13, 1.4779) -> (13, -1.4779) centre (15.3831, 0) ccw
  point P0 (0, 0)
sketch "Sketch55" plane through (0, 0, 0) normal (0, 0, 1) x (1, 0, 0)
  arc A0 (4.58, 19.7001) -> (6, 11) centre (32.9729, 19.8682) ccw
  arc A1 (4.58, 19.7001) -> (6, 11) centre (11.8372, 16.4186) ccw
  point P0 (0, 0)
ref_plane "Work Plane5" through (0, 0, 15) normal (0, 0, 1) x (1, 0, 0)
sketch "Sketch56" plane through (0, 0, 15) normal (0, 0, 1) x (1, 0, 0)
  arc A0 (6.4152, 10.1452) -> (4, 25) centre (-21.1275, 13.2908) ccw
  arc A1 (4, 25) -> (6.4152, 10.1452) centre (20.5376, 20.0651) ccw
  point P0 (0, 0)
ref_plane "Work Plane3" through (0, 0, 0) normal (0, 0, 1) x (1, 0, 0)
ref_plane "Work Plane6" through (0, 0, -15) normal (0, 0, 1) x (1, 0, 0)
sketch "Sketch57" plane through (0, 0, -15) normal (0, 0, 1) x (1, 0, 0)
  arc A0 (5.512, 20.9612) -> (4.7992, 23.1043) centre (-21.1275, 13.2908) ccw projected
  arc A1 (6.4152, 10.1452) -> (4.7992, 23.1043) centre (-21.1275, 13.2908) ccw
  arc A2 (4.7992, 23.1043) -> (6.4152, 10.1452) centre (4.6042, 16.4997) ccw
  point P0 (0, 0)
ref_plane "Work Plane7" through (0, 0, -15) normal (0, 0, 1) x (1, 0, 0)
sketch "Sketch58" plane through (0, 0, -15) normal (0, 0, 1) x (1, 0, 0)
  arc A0 (4.5821, 19.4868) -> (4.7951, 33.432) centre (-39.5171, 27.1347) ccw
  arc A1 (4.5821, 19.4868) -> (5.6499, 12.1459) centre (32.9729, 19.8682) ccw
  arc A2 (4.7951, 33.432) -> (5.6499, 12.1459) centre (19.8894, 23.3779) ccw
  point P0 (0, 0)
ref_plane "Work Plane8" through (0, 0, -15) normal (0, 0, 1) x (1, 0, 0)
sketch "Sketch59" plane through (0, 0, -15) normal (0, 0, 1) x (1, 0, 0)
  arc A0 (4.5821, 19.4868) -> (4.7951, 33.432) centre (-39.5171, 27.1347) ccw
  arc A1 (4.5821, 19.4868) -> (5.6499, 12.1459) centre (32.9729, 19.8682) ccw
  arc A2 (4.7951, 33.432) -> (5.6499, 12.1459) centre (19.8894, 23.3779) ccw
  point P0 (0, 0)
sketch "Sketch60" plane through (0, 0, 0) normal (1, 0, 0) x (0, 1, 0)
  line L0 (12.1111, 15) -> (12.1111, 21.5884)
  line L1 (12.1111, 21.5884) -> (12.1111, 15)
  line L2 (20.9612, 15.726) -> (20.9612, 15) projected
  line L3 (20.9612, 15) -> (20.9612, 15.726)
  arc A0 (20.9612, 15.726) -> (12.1111, 21.5884) centre (4.1775, 0) ccw
  line L4 (12.1111, -21.5884) -> (12.1111, -15)
  line L5 (12.1459, -15) -> (12.1111, -21.5884)
  line L6 (20.9612, -15) -> (20.9612, -15.726) projected
  line L7 (20.9612, -15) -> (20.9612, -15.726)
  arc A1 (12.1111, -21.5884) -> (20.9612, -15.726) centre (4.1775, 0) ccw
  line L8 (12.1111, 15) -> (12.1111, 21.5884) projected
  line L9 (22.5441, 15) -> (20.9612, 15) projected
  arc A2 (12.1111, 15) -> (20.9612, 15) centre (16.5362, 45.9173) ccw
  arc A3 (20.9612, -15) -> (12.1111, -15) centre (16.5362, -33.5759) ccw
  point P0 (0, 0)
ref_plane "Work Plane9" through (0, 0, -15) normal (0, 0, 1) x (1, 0, 0)
sketch "Sketch61" plane through (0, 0, -15) normal (0, 0, 1) x (1, 0, 0)
  line L0 (5.6658, 12.1111) -> (6.5691, 12.1111) projected
  line L1 (6.5691, 12.1111) -> (-0.1843, 12.1111)
  line L2 (5.512, 20.9612) -> (-0.1843, 20.9612)
  line L3 (0, 20.9612) -> (4.8126, 20.9612) projected
  arc A0 (-0.1843, 20.9612) -> (-0.1843, 12.1111) centre (11.2781, 16.5362) ccw
  line L4 (6.5691, 12.1111) -> (6.63, 12.1111) projected
  arc A1 (6.5691, 12.1111) -> (5.512, 20.9612) centre (-21.1275, 13.2908) ccw
  point P0 (0, 0)
ref_plane "Work Plane10" through (0, 0, -15) normal (0, 0, 1) x (1, 0, 0)
sketch "Sketch62" plane through (0, 0, -15) normal (0, 0, 1) x (1, 0, 0)
  line L0 (6.5691, 12.1111) -> (-0.1843, 12.1111)
  line L1 (5.512, 20.9612) -> (-0.1843, 20.9612)
  arc A0 (-0.1843, 20.9612) -> (-0.1843, 12.1111) centre (11.2781, 16.5362) ccw
  line L2 (4.8126, 20.9612) -> (5.512, 20.9612) projected
  arc A1 (5.512, 20.9612) -> (5.3976, 15.5783) centre (27.7821, 17.7954) ccw
  arc A2 (5.3976, 15.5783) -> (6.1482, 13) centre (8.4638, 15.0726) ccw
  line L3 (6.1482, 13) -> (6.5691, 12.1111)
  point P0 (0, 0)
  point P1 (0, 20.9612)
ref_plane "Work Plane12" through (0, 0, 15) normal (0, 0, 1) x (1, 0, 0)
sketch "Sketch65" plane through (0, 0, 15) normal (0, 0, 1) x (1, 0, 0)
  line L0 (0, 12.1111) -> (0, 20.9612)
  line L1 (0, 20.9612) -> (0, 12.1111)
  line L2 (0, 12.1111) -> (5.6659, 12.1111)
  line L3 (0, 12.1111) -> (0, 20.9612) projected
  line L4 (0, 20.9612) -> (4.8105, 20.9612)
  line L5 (0, 20.9612) -> (5.512, 20.9612) projected
  arc A0 (4.8126, 20.9612) -> (4.8105, 16.2544) centre (16.6683, 18.6025) ccw
  arc A1 (4.8105, 16.2544) -> (5.6659, 12.1111) centre (31.8657, 19.6806) ccw
  point P0 (0, 0)
ref_plane "Work Plane11" through (0, 0, 15) normal (0, 0, 1) x (1, 0, 0)
sketch "Sketch67" plane through (0, 0, 15) normal (0, 0, 1) x (1, 0, 0)
  line L0 (0, 12.1111) -> (5.6658, 12.1111)
  line L1 (6.5691, 12.1111) -> (0, 12.1111)
  line L2 (0, 12.1111) -> (0, 20.9612) projected
  line L3 (0, 12.1111) -> (0, 20.9612)
  line L4 (5.512, 20.9612) -> (0, 20.9612)
  arc A0 (5.512, 20.9612) -> (5.3976, 15.5783) centre (27.7821, 17.7954) ccw
  line L5 (6.5691, 12.1111) -> (6.1482, 13)
  arc A1 (5.3976, 15.5783) -> (6.1482, 13) centre (8.4638, 15.0726) ccw
  point P0 (0, 0)
ref_plane "Work Plane15" through (6.63, 0, 0) normal (1, 0, 0) x (0, 0, -1)
sketch "Sketch68" plane through (6.63, 0, 0) normal (1, 0, 0) x (0, 0, -1)
  arc A0 (14, 22) -> (14, 11) centre (62.4766, 16.5) ccw
  arc A1 (14, 11) -> (14, 22) centre (11.848, 16.5) ccw
  arc A2 (14, 10) -> (21.6289, 12) centre (11.8491, 33.7543) ccw
  arc A3 (13, 15) -> (14, 10) centre (21, 14) ccw
  arc A4 (21.6289, 12) -> (13, 15) centre (14.4695, 5.3172) ccw
  arc A5 (-21.5884, 12.1111) -> (-13.1641, 12.1459) centre (-17.4061, 19.3527) ccw
  arc A6 (-13.1641, 12.1459) -> (-21.5884, 12.1111) centre (-17.3607, 8.3588) ccw
  arc A7 (-14.3886, 22) -> (-14.4349, 10.6825) centre (-5.1535, 16.3034) ccw
  arc A8 (-14.4349, 10.6825) -> (-14.3886, 22) centre (-35.9078, 16.429) ccw
  point P0 (0, 0)
sketch "Sketch69" plane through (0, 0, 0) normal (1, 0, 0) x (0, 1, 0)
  arc A0 (-3, -7.5651) -> (11.0179, -2.9788) centre (0.2424, 6.2404) ccw
  line L0 (-3, -7.5651) -> (-3, -6.6289)
  line L1 (11.0179, -2.9788) -> (11.0179, -1.943)
  arc A1 (11.0179, -1.943) -> (10.1452, -2.6581) centre (12.4245, -4.5498) ccw
  arc A2 (-3, -6.6289) -> (10.1452, -2.6581) centre (0.5731, 5.2863) ccw
  line L2 (-8.9035, 0) -> (17, 0) construction
  arc A3 (11.0179, 2.9788) -> (-3, 7.5651) centre (0.2424, -6.2404) ccw
  line L3 (-3, 7.5651) -> (-3, 6.6289)
  line L4 (11.0179, 2.9788) -> (11.0179, 1.943)
  arc A4 (10.1452, 2.6581) -> (11.0179, 1.943) centre (12.4245, 4.5498) ccw
  arc A5 (10.1452, 2.6581) -> (-3, 6.6289) centre (0.5731, -5.2863) ccw
  point P0 (0, 0)
  point P1 (6.0475, -5.8837)
sketch "Sketch70" plane through (0, 0, 0) normal (0, 0, 1) x (1, 0, 0)
  arc A0 (4, -3) -> (7.812, 5.972) centre (-6.9875, 6.9641) ccw
  arc A1 (4, -3) -> (8, -3) centre (6, 0.2231) ccw
  arc A2 (8, -3) -> (7.812, 5.972) centre (-95.4852, -0.6804) ccw
  arc A3 (7.8, 6.0475) -> (6.9938, 11.0179) centre (-4.9894, 6.5238) ccw
  arc A4 (7.8, 6.0475) -> (6.9938, 11.0179) centre (7.8859, 8.612) ccw
  arc A5 (3.0655, -3) -> (5.6658, 12.1111) centre (-16.4907, 8.1445) ccw
  line L0 (3.0655, -3) -> (4, -3) projected
  arc A6 (5.6658, 12.1111) -> (3.0655, -3) centre (0.9123, 5.1498) ccw
sketch "Sketch71" plane through (0, 0, 0) normal (0, 0, 1) x (1, 0, 0)
  line L0 (21.3234, 1.813) -> (-3.8328, 3.9894)
  line L1 (6.7281, 29.5792) -> (31.9548, 41.3881)
  line L2 (2.1762, -23.0341) -> (25, -39)
  line L3 (2.1762, -23.0341) -> (2.3639, -21.5054)
  line L4 (2.3639, -21.5054) -> (3.7434, -22.1348)
  line L5 (3.7434, -22.1348) -> (4.2532, -20)
  line L6 (4.2532, -20) -> (3.0537, -20.1909)
  line L7 (3.0537, -20.1909) -> (3, -18)
  line L8 (3, -18) -> (6, -19)
  line L9 (6, -19) -> (5.7028, -22.6912)
  line L10 (5.7028, -22.6912) -> (25, -36)
  line L11 (25, -39) -> (25, -36)
  line L12 (6.7281, 29.5792) -> (6.7281, 28.625)
  line L13 (6.7281, 28.625) -> (8.2975, 28.625)
  line L14 (8.2975, 28.625) -> (8.7453, 26.5871)
  line L15 (8.7453, 26.5871) -> (6.7281, 26.5871)
  line L16 (6.7281, 26.5871) -> (6.7281, 25.1274)
  line L17 (6.7281, 25.1274) -> (9.7835, 25.1274)
  line L18 (9.7835, 25.1274) -> (9.4996, 29.1021)
  line L19 (9.4996, 29.1021) -> (31.9548, 38.8479)
  line L20 (31.9548, 41.3881) -> (31.9548, 38.8479)
  point P0 (0, 0)
revolve "Revolution5" add sketch "Sketch71" angle 180 mid plane about axis through (21.3234, 1.813, 0) along (-0.9962784, 0.0861934, 0) contours L1 L20 L19 L18 L17 L16 L15 L14 L13 L12
sketch "Sketch72" plane through (4.4522, 3.2726, 26.4049) normal (-0.0861934, -0.9962784, 0) x (0.8625471, -0.0746236, 0.5004436)
  line L0 (25.9097, -0.4851) -> (25.9087, -1.4723)
  line L1 (25.9097, -0.4851) -> (17, -0.4758)
  line L2 (17, -0.4758) -> (16.999, -1.463)
  line L3 (25.9087, -1.4723) -> (16.999, -1.463)
  line L4 (-12.5937, -66.7439) -> (-13.4518, -67.2321)
  line L5 (-12.5937, -66.7439) -> (-17, -59)
  line L6 (-17, -59) -> (-17.8581, -59.4882)
  line L7 (-13.4518, -67.2321) -> (-17.8581, -59.4882)
  point P0 (-16.8102, -20.782)
extrude "Extrusion58" add sketch "Sketch72" along normal blind 3
properties part number "cSkull_meso_WOK_tall_VIS_left"
